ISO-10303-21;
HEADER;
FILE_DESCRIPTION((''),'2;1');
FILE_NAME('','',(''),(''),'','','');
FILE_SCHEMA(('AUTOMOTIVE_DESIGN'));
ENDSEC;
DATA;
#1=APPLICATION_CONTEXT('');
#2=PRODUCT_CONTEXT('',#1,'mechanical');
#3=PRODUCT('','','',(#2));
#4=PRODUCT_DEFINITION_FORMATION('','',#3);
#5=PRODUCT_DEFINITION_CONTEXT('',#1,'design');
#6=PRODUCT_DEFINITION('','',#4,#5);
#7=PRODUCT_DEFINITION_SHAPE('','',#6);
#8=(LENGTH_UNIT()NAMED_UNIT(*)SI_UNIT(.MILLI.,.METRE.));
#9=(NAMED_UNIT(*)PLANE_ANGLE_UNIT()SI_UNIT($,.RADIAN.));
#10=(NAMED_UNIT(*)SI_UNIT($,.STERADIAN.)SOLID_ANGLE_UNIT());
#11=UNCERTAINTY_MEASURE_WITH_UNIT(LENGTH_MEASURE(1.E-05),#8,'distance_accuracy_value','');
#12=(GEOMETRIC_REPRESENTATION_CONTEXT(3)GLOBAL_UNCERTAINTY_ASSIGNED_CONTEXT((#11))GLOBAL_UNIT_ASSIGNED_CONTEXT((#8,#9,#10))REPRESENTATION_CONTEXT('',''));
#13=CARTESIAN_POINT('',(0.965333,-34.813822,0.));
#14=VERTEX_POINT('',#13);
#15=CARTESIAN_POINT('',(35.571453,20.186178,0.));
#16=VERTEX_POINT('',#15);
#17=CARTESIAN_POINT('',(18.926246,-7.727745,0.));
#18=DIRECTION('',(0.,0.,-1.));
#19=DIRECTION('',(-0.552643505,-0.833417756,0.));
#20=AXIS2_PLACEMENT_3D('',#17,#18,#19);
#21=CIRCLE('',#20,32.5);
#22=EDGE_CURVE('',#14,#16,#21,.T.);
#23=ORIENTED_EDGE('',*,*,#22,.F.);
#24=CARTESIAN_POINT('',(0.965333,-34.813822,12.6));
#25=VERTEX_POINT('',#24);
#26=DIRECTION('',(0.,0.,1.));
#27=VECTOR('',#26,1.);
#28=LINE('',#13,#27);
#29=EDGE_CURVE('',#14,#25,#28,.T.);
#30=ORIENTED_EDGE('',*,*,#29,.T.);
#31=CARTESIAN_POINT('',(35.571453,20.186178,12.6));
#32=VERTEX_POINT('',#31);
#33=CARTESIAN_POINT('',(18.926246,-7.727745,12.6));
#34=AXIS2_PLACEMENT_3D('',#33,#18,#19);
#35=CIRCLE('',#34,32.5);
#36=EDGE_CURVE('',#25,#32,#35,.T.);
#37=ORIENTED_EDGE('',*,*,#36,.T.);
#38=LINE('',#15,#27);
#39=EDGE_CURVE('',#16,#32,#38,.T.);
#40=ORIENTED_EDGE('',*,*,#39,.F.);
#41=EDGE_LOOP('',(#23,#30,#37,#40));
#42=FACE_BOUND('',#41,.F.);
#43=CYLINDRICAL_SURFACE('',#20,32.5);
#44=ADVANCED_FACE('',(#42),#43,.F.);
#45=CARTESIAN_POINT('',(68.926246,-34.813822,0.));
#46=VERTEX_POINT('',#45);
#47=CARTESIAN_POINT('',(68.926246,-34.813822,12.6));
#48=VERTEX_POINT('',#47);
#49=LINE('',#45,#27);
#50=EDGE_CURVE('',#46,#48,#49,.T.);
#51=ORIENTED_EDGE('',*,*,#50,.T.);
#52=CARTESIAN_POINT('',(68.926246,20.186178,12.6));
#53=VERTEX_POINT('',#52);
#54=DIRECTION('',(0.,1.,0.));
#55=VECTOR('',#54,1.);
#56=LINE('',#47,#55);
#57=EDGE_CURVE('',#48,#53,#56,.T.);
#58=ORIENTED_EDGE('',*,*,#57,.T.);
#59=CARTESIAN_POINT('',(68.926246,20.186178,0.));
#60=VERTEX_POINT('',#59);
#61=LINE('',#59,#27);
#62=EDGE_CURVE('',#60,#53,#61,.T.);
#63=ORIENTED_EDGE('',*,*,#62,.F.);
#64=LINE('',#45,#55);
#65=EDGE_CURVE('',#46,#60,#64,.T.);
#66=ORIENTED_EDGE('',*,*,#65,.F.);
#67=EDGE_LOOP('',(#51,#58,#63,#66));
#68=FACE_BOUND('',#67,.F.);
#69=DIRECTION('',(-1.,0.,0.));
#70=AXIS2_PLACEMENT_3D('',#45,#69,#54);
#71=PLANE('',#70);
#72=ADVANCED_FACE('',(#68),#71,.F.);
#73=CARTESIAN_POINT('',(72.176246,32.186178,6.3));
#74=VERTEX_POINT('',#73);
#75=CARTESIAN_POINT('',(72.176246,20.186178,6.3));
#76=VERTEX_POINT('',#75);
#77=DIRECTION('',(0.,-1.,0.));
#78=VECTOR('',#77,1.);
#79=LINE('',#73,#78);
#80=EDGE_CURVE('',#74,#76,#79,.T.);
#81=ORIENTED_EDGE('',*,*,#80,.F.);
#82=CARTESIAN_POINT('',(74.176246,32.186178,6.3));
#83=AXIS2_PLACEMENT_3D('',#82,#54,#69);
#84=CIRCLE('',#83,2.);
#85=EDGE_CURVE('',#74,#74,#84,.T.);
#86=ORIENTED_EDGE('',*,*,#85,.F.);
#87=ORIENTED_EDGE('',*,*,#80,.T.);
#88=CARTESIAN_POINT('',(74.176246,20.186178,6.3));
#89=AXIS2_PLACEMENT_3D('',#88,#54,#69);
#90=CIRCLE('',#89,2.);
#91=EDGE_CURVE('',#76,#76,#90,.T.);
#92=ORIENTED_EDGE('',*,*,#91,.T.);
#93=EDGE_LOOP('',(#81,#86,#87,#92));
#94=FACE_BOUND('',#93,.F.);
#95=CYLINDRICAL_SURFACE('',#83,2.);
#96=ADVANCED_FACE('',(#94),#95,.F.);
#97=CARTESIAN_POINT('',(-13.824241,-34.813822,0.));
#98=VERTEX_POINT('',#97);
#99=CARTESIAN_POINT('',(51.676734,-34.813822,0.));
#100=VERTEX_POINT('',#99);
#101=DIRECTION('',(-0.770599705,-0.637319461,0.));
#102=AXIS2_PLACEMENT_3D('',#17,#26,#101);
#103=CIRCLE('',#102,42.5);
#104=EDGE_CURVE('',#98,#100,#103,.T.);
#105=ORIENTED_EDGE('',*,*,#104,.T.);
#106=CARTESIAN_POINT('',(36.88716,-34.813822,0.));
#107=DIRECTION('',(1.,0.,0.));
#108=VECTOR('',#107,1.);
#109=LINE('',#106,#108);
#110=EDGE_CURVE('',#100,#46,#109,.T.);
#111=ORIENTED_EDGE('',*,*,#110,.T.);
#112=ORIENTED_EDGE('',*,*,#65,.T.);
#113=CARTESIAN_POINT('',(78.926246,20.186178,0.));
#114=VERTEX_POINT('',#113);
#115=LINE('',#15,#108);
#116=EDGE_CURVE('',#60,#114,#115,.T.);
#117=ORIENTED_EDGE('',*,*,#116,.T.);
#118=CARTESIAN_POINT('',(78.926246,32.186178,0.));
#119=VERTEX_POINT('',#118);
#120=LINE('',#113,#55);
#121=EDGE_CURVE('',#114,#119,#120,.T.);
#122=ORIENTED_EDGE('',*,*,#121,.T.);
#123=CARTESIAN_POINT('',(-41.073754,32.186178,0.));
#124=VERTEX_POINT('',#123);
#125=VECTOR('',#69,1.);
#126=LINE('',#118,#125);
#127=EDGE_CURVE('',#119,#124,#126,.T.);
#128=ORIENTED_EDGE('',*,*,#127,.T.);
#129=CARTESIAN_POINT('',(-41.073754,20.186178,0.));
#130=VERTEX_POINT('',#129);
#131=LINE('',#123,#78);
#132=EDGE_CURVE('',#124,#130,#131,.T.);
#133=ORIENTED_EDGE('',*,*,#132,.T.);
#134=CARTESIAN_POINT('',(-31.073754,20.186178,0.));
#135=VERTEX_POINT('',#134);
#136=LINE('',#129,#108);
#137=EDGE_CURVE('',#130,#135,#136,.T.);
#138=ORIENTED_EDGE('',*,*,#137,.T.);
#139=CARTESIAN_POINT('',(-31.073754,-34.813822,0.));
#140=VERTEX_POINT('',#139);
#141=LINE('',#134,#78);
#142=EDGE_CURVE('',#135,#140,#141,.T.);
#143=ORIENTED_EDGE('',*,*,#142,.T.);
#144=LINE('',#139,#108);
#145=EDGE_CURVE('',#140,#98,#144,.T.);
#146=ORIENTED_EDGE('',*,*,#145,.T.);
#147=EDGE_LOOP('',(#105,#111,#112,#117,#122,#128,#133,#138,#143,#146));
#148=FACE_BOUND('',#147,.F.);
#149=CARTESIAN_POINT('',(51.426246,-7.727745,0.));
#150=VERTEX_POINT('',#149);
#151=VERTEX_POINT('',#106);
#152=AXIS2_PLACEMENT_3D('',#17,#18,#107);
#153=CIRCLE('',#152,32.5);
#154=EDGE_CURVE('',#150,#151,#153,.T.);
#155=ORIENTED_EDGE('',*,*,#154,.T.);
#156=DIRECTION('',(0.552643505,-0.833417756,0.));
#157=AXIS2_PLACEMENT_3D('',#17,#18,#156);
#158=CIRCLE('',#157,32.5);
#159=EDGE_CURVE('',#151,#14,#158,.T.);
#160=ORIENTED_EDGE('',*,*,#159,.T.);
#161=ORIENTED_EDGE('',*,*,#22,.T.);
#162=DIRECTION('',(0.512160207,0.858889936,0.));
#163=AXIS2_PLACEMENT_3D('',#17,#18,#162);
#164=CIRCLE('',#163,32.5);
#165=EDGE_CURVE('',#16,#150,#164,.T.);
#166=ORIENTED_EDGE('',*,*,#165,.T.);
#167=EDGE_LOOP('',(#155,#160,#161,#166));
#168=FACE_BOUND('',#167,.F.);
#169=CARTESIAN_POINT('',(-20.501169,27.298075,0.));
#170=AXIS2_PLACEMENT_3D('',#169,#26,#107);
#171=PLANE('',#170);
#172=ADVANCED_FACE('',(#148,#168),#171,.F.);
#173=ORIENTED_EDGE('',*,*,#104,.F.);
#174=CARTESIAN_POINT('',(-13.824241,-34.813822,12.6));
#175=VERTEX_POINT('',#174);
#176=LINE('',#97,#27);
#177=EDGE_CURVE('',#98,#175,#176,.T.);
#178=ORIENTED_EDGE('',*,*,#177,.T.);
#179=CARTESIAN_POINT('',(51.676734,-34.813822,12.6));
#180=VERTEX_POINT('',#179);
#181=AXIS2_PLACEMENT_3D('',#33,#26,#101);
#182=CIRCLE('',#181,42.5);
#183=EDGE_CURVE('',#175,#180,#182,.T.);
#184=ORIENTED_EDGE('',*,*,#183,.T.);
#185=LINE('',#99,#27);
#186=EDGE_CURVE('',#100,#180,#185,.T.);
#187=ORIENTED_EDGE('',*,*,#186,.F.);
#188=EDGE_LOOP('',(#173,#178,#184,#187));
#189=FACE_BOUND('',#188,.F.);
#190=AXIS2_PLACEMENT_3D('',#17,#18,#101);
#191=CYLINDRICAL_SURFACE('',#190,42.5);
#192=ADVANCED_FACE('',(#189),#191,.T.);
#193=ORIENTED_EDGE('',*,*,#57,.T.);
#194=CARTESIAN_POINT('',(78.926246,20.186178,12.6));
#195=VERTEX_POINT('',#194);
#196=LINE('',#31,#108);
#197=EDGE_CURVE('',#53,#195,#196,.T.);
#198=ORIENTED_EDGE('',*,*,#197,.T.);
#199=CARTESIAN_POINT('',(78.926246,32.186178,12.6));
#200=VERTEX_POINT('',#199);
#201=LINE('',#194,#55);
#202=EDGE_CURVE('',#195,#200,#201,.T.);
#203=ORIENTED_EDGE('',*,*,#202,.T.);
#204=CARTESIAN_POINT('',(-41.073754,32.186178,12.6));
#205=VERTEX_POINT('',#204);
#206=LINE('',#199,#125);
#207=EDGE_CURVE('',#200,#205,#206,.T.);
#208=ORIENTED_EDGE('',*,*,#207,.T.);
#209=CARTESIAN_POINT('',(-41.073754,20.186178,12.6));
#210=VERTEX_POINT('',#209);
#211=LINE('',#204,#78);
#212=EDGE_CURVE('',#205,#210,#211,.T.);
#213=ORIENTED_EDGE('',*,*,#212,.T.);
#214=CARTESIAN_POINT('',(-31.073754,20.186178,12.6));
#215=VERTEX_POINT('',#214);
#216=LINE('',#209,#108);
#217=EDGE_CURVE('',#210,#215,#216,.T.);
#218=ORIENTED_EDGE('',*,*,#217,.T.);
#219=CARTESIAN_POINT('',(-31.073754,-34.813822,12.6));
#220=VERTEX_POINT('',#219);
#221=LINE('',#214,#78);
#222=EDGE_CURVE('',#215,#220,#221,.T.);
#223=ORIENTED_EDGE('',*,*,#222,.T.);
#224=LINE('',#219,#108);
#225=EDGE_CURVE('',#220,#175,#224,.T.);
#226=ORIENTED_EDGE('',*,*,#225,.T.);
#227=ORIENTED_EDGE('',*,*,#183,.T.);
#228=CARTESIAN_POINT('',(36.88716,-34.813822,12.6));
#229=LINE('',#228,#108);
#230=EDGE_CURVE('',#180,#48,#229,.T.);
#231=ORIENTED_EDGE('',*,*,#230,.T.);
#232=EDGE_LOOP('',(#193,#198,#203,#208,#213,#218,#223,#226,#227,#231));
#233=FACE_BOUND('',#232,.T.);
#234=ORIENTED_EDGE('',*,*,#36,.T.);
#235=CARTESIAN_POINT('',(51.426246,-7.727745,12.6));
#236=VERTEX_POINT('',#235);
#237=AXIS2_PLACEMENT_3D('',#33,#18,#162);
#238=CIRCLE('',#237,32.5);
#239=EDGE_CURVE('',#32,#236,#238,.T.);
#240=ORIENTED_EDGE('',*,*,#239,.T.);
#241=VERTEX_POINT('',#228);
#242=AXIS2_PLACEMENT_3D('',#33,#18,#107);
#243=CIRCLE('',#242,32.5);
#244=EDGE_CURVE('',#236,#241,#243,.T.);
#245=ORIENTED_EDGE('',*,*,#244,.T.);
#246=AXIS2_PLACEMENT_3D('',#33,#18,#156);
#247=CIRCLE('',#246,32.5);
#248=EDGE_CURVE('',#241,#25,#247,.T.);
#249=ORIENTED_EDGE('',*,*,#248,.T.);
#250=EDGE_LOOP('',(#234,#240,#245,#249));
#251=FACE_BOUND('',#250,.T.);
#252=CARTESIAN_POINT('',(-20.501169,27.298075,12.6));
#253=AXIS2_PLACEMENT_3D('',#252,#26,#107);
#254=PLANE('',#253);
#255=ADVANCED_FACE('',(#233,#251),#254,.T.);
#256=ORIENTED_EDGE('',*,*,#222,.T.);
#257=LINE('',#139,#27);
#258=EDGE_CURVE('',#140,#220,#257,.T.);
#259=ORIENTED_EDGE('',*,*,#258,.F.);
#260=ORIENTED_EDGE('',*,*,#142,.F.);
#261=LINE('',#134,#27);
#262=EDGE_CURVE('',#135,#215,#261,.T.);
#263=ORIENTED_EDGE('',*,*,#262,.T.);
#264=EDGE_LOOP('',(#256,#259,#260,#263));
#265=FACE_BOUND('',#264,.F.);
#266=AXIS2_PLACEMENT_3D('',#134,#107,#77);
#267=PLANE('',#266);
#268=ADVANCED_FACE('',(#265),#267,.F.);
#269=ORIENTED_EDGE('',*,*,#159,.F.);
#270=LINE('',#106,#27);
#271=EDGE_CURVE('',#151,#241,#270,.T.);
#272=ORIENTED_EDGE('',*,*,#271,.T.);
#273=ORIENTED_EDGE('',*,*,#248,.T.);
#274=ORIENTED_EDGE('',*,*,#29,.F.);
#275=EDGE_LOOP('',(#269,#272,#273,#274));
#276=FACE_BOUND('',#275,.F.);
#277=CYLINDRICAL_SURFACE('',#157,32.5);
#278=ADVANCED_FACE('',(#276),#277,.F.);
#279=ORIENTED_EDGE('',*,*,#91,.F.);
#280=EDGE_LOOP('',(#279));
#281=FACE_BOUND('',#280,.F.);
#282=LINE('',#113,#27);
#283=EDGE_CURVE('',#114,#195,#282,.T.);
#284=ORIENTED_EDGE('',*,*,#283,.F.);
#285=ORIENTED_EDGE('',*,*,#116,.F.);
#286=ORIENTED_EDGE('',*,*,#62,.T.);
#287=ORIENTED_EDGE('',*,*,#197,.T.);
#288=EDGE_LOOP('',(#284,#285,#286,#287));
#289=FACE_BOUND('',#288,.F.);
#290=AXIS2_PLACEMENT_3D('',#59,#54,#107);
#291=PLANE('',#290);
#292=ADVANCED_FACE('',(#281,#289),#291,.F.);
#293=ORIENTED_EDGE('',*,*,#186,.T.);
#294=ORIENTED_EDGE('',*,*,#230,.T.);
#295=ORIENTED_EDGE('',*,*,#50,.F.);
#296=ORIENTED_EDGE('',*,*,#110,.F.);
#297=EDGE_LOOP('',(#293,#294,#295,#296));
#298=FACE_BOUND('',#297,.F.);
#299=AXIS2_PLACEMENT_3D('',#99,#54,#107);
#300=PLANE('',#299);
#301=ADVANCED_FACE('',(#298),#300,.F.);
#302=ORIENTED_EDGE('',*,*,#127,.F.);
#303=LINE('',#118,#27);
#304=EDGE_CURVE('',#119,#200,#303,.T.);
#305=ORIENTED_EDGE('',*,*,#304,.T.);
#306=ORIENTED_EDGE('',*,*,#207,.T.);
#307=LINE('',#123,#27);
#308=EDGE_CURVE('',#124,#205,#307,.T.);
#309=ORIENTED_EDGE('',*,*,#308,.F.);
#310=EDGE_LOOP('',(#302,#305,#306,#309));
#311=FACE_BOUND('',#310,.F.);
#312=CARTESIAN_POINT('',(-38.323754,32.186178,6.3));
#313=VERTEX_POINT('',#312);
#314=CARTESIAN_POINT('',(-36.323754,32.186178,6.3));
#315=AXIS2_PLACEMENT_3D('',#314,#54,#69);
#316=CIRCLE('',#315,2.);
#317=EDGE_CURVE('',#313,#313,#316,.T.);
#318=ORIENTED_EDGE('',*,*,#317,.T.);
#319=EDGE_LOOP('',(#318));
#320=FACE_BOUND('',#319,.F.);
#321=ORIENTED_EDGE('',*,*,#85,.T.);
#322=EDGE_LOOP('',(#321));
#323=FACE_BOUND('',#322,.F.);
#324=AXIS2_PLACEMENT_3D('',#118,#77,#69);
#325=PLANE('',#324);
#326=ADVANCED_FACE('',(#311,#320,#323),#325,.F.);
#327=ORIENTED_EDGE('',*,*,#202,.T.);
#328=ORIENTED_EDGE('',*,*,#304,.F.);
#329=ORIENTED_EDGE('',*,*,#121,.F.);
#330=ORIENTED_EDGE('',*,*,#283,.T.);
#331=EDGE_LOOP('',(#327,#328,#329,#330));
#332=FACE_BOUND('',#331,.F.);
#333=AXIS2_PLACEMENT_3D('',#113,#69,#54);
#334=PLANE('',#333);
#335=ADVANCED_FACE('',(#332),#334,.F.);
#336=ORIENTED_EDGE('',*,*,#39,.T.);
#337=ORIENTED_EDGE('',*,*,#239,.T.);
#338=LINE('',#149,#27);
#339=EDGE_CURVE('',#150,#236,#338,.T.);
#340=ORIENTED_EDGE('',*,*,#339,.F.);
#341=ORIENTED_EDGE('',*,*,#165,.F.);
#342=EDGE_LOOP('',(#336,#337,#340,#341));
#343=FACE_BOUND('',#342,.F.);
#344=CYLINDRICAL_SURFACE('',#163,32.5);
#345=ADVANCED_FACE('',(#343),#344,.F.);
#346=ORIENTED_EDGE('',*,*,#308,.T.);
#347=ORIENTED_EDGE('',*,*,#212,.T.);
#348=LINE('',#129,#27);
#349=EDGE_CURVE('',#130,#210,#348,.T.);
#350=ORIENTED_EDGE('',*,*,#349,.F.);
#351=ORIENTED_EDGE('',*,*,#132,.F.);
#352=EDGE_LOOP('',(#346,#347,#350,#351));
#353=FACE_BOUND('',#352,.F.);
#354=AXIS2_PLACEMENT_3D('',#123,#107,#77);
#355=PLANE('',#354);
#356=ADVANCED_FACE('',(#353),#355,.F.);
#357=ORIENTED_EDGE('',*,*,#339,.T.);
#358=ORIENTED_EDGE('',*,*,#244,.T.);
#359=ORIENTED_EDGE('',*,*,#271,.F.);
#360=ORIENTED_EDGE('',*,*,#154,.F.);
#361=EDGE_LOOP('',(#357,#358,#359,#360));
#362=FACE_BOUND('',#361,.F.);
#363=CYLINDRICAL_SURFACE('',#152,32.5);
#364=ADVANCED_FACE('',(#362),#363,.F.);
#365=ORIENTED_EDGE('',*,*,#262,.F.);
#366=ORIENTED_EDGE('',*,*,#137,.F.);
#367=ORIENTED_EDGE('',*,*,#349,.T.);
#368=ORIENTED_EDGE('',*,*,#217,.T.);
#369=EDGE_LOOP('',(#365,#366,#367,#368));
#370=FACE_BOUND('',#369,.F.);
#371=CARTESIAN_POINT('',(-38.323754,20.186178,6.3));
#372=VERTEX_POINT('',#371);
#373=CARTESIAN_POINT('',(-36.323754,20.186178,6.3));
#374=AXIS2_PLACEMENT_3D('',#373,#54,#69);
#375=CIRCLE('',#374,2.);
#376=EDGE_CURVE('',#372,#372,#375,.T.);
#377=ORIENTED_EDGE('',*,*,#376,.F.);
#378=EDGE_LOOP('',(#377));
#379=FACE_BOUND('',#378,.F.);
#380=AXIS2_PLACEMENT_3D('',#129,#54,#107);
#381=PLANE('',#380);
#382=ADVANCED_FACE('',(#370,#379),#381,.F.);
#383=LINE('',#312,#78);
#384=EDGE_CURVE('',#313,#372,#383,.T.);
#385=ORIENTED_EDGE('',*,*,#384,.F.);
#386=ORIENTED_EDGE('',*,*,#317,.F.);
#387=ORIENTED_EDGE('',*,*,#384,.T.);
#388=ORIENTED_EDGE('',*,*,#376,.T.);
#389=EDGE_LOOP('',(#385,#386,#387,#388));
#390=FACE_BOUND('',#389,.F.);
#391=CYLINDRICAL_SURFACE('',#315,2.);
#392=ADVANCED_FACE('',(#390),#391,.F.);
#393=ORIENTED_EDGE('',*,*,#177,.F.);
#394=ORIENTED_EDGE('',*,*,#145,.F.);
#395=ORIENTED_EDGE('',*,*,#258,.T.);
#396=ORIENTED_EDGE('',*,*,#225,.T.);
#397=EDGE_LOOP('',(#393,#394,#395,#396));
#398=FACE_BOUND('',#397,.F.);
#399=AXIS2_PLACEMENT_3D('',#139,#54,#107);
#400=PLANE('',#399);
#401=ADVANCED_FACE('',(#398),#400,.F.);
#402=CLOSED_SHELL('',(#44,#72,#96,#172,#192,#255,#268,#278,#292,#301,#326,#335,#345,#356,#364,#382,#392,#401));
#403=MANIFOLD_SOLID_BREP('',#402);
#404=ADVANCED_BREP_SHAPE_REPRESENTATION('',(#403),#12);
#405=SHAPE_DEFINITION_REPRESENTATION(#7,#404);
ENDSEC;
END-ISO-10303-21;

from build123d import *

# Parameters (mm, degrees)
F1_DEPTH = 12.6
F2_R     = 2
F3_DEPTH = 82.4149229208


# Not quite as in the source:
# - a feature names something its author has since deleted; it is built from what else it names


with BuildPart() as f1:
    # F0 (on Top) → F1 (new body)
    with BuildSketch(Plane.XY):
        with BuildLine():
            Line((4.3273164821, 32.1861776987), (-41.0737535205, 32.1861776987))
            Line((-41.0737535205, 32.1861776987), (-41.0737535205, 20.1861776987))
            Line((-41.0737535205, 20.1861776987), (-31.0737535205, 20.1861776987))
            Line((-31.0737535205, 20.1861776987), (-13.1215757112, 20.1861776987))
            ThreePointArc((-13.1215757112, 20.1861776987), (-5.1565247985, 27.2903947567), (4.3273164821, 32.1861776987))
        make_face()
        with BuildLine():
            Line((33.525176477, 32.1861776987), (4.3273164821, 32.1861776987))
            ThreePointArc((4.3273164821, 32.1861776987), (-5.1565247985, 27.2903947567), (-13.1215757112, 20.1861776987))
            Line((-13.1215757112, 20.1861776987), (2.2810397469, 20.1861776987))
            ThreePointArc((2.2810397469, 20.1861776987), (18.9262464795, 24.7722547779), (35.5714532121, 20.1861776987))
            Line((35.5714532121, 20.1861776987), (50.9740686703, 20.1861776987))
            ThreePointArc((50.9740686703, 20.1861776987), (43.0090177575, 27.2903947567), (33.525176477, 32.1861776987))
        make_face()
        with BuildLine():
            Line((78.9262464795, 32.1861776987), (33.525176477, 32.1861776987))
            ThreePointArc((33.525176477, 32.1861776987), (43.0090177575, 27.2903947567), (50.9740686703, 20.1861776987))
            Line((50.9740686703, 20.1861776987), (68.9262464795, 20.1861776987))
            Line((68.9262464795, 20.1861776987), (78.9262464795, 20.1861776987))
            Line((78.9262464795, 20.1861776987), (78.9262464795, 32.1861776987))
        make_face()
        with BuildLine():
            Line((68.9262464795, 20.1861776987), (50.9740686703, 20.1861776987))
            ThreePointArc((50.9740686703, 20.1861776987), (58.7275180868, 7.1755691223), (61.4262464795, -7.7277452221))
            ThreePointArc((61.4262464795, -7.7277452221), (58.9146555301, -22.121394572), (51.6767339333, -34.8138223013))
            Line((51.6767339333, -34.8138223013), (68.9262464795, -34.8138223013))
            Line((68.9262464795, -34.8138223013), (68.9262464795, 20.1861776987))
        make_face()
        with BuildLine():
            ThreePointArc((-13.8242409743, -34.8138223013), (-23.5702855343, -7.1848209158), (-13.1215757112, 20.1861776987))
            Line((-13.1215757112, 20.1861776987), (-31.0737535205, 20.1861776987))
            Line((-31.0737535205, 20.1861776987), (-31.0737535205, -34.8138223013))
            Line((-31.0737535205, -34.8138223013), (-19.9806198337, -34.8138223013))
            Line((-19.9806198337, -34.8138223013), (-13.8242409743, -34.8138223013))
        make_face()
        with BuildLine():
            Line((2.2810397469, 20.1861776987), (-13.1215757112, 20.1861776987))
            ThreePointArc((-13.1215757112, 20.1861776987), (-23.5702855343, -7.1848209158), (-13.8242409743, -34.8138223013))
            Line((-13.8242409743, -34.8138223013), (0.9653325701, -34.8138223013))
            ThreePointArc((0.9653325701, -34.8138223013), (-13.5644582908, -6.9505042503), (2.2810397469, 20.1861776987))
        make_face()
        with BuildLine():
            ThreePointArc((61.4262464795, -7.7277452221), (58.7275180868, 7.1755691223), (50.9740686703, 20.1861776987))
            Line((50.9740686703, 20.1861776987), (35.5714532121, 20.1861776987))
            ThreePointArc((35.5714532121, 20.1861776987), (47.1859281728, 8.3234351269), (51.4262464795, -7.7277452221))
            ThreePointArc((51.4262464795, -7.7277452221), (47.5617113968, -23.0985015136), (36.8871603889, -34.8138223013))
            Line((36.8871603889, -34.8138223013), (51.6767339333, -34.8138223013))
            ThreePointArc((51.6767339333, -34.8138223013), (58.9146555301, -22.121394572), (61.4262464795, -7.7277452221))
        make_face()
        with BuildLine():
            Line((0.9653325701, -34.8138223013), (-13.8242409743, -34.8138223013))
            ThreePointArc((-13.8242409743, -34.8138223013), (18.9262464795, -50.2277452221), (51.6767339333, -34.8138223013))
            Line((51.6767339333, -34.8138223013), (36.8871603889, -34.8138223013))
            ThreePointArc((36.8871603889, -34.8138223013), (18.9262464795, -40.2277452221), (0.9653325701, -34.8138223013))
        make_face()
    extrude(amount=F1_DEPTH)

    # F2 (on face) → F3 (cut, through all)
    with BuildSketch(Plane(origin=(0, 32.1861776987, 0), x_dir=(-1, 0, 0), z_dir=(0, 1, 0))):
        with Locations((-74.1762464795, 6.3)):
            Circle(F2_R)
        with Locations((36.3237535205, 6.3)):
            Circle(F2_R)
    extrude(amount=-F3_DEPTH, mode=Mode.SUBTRACT)


solid = f1.part
